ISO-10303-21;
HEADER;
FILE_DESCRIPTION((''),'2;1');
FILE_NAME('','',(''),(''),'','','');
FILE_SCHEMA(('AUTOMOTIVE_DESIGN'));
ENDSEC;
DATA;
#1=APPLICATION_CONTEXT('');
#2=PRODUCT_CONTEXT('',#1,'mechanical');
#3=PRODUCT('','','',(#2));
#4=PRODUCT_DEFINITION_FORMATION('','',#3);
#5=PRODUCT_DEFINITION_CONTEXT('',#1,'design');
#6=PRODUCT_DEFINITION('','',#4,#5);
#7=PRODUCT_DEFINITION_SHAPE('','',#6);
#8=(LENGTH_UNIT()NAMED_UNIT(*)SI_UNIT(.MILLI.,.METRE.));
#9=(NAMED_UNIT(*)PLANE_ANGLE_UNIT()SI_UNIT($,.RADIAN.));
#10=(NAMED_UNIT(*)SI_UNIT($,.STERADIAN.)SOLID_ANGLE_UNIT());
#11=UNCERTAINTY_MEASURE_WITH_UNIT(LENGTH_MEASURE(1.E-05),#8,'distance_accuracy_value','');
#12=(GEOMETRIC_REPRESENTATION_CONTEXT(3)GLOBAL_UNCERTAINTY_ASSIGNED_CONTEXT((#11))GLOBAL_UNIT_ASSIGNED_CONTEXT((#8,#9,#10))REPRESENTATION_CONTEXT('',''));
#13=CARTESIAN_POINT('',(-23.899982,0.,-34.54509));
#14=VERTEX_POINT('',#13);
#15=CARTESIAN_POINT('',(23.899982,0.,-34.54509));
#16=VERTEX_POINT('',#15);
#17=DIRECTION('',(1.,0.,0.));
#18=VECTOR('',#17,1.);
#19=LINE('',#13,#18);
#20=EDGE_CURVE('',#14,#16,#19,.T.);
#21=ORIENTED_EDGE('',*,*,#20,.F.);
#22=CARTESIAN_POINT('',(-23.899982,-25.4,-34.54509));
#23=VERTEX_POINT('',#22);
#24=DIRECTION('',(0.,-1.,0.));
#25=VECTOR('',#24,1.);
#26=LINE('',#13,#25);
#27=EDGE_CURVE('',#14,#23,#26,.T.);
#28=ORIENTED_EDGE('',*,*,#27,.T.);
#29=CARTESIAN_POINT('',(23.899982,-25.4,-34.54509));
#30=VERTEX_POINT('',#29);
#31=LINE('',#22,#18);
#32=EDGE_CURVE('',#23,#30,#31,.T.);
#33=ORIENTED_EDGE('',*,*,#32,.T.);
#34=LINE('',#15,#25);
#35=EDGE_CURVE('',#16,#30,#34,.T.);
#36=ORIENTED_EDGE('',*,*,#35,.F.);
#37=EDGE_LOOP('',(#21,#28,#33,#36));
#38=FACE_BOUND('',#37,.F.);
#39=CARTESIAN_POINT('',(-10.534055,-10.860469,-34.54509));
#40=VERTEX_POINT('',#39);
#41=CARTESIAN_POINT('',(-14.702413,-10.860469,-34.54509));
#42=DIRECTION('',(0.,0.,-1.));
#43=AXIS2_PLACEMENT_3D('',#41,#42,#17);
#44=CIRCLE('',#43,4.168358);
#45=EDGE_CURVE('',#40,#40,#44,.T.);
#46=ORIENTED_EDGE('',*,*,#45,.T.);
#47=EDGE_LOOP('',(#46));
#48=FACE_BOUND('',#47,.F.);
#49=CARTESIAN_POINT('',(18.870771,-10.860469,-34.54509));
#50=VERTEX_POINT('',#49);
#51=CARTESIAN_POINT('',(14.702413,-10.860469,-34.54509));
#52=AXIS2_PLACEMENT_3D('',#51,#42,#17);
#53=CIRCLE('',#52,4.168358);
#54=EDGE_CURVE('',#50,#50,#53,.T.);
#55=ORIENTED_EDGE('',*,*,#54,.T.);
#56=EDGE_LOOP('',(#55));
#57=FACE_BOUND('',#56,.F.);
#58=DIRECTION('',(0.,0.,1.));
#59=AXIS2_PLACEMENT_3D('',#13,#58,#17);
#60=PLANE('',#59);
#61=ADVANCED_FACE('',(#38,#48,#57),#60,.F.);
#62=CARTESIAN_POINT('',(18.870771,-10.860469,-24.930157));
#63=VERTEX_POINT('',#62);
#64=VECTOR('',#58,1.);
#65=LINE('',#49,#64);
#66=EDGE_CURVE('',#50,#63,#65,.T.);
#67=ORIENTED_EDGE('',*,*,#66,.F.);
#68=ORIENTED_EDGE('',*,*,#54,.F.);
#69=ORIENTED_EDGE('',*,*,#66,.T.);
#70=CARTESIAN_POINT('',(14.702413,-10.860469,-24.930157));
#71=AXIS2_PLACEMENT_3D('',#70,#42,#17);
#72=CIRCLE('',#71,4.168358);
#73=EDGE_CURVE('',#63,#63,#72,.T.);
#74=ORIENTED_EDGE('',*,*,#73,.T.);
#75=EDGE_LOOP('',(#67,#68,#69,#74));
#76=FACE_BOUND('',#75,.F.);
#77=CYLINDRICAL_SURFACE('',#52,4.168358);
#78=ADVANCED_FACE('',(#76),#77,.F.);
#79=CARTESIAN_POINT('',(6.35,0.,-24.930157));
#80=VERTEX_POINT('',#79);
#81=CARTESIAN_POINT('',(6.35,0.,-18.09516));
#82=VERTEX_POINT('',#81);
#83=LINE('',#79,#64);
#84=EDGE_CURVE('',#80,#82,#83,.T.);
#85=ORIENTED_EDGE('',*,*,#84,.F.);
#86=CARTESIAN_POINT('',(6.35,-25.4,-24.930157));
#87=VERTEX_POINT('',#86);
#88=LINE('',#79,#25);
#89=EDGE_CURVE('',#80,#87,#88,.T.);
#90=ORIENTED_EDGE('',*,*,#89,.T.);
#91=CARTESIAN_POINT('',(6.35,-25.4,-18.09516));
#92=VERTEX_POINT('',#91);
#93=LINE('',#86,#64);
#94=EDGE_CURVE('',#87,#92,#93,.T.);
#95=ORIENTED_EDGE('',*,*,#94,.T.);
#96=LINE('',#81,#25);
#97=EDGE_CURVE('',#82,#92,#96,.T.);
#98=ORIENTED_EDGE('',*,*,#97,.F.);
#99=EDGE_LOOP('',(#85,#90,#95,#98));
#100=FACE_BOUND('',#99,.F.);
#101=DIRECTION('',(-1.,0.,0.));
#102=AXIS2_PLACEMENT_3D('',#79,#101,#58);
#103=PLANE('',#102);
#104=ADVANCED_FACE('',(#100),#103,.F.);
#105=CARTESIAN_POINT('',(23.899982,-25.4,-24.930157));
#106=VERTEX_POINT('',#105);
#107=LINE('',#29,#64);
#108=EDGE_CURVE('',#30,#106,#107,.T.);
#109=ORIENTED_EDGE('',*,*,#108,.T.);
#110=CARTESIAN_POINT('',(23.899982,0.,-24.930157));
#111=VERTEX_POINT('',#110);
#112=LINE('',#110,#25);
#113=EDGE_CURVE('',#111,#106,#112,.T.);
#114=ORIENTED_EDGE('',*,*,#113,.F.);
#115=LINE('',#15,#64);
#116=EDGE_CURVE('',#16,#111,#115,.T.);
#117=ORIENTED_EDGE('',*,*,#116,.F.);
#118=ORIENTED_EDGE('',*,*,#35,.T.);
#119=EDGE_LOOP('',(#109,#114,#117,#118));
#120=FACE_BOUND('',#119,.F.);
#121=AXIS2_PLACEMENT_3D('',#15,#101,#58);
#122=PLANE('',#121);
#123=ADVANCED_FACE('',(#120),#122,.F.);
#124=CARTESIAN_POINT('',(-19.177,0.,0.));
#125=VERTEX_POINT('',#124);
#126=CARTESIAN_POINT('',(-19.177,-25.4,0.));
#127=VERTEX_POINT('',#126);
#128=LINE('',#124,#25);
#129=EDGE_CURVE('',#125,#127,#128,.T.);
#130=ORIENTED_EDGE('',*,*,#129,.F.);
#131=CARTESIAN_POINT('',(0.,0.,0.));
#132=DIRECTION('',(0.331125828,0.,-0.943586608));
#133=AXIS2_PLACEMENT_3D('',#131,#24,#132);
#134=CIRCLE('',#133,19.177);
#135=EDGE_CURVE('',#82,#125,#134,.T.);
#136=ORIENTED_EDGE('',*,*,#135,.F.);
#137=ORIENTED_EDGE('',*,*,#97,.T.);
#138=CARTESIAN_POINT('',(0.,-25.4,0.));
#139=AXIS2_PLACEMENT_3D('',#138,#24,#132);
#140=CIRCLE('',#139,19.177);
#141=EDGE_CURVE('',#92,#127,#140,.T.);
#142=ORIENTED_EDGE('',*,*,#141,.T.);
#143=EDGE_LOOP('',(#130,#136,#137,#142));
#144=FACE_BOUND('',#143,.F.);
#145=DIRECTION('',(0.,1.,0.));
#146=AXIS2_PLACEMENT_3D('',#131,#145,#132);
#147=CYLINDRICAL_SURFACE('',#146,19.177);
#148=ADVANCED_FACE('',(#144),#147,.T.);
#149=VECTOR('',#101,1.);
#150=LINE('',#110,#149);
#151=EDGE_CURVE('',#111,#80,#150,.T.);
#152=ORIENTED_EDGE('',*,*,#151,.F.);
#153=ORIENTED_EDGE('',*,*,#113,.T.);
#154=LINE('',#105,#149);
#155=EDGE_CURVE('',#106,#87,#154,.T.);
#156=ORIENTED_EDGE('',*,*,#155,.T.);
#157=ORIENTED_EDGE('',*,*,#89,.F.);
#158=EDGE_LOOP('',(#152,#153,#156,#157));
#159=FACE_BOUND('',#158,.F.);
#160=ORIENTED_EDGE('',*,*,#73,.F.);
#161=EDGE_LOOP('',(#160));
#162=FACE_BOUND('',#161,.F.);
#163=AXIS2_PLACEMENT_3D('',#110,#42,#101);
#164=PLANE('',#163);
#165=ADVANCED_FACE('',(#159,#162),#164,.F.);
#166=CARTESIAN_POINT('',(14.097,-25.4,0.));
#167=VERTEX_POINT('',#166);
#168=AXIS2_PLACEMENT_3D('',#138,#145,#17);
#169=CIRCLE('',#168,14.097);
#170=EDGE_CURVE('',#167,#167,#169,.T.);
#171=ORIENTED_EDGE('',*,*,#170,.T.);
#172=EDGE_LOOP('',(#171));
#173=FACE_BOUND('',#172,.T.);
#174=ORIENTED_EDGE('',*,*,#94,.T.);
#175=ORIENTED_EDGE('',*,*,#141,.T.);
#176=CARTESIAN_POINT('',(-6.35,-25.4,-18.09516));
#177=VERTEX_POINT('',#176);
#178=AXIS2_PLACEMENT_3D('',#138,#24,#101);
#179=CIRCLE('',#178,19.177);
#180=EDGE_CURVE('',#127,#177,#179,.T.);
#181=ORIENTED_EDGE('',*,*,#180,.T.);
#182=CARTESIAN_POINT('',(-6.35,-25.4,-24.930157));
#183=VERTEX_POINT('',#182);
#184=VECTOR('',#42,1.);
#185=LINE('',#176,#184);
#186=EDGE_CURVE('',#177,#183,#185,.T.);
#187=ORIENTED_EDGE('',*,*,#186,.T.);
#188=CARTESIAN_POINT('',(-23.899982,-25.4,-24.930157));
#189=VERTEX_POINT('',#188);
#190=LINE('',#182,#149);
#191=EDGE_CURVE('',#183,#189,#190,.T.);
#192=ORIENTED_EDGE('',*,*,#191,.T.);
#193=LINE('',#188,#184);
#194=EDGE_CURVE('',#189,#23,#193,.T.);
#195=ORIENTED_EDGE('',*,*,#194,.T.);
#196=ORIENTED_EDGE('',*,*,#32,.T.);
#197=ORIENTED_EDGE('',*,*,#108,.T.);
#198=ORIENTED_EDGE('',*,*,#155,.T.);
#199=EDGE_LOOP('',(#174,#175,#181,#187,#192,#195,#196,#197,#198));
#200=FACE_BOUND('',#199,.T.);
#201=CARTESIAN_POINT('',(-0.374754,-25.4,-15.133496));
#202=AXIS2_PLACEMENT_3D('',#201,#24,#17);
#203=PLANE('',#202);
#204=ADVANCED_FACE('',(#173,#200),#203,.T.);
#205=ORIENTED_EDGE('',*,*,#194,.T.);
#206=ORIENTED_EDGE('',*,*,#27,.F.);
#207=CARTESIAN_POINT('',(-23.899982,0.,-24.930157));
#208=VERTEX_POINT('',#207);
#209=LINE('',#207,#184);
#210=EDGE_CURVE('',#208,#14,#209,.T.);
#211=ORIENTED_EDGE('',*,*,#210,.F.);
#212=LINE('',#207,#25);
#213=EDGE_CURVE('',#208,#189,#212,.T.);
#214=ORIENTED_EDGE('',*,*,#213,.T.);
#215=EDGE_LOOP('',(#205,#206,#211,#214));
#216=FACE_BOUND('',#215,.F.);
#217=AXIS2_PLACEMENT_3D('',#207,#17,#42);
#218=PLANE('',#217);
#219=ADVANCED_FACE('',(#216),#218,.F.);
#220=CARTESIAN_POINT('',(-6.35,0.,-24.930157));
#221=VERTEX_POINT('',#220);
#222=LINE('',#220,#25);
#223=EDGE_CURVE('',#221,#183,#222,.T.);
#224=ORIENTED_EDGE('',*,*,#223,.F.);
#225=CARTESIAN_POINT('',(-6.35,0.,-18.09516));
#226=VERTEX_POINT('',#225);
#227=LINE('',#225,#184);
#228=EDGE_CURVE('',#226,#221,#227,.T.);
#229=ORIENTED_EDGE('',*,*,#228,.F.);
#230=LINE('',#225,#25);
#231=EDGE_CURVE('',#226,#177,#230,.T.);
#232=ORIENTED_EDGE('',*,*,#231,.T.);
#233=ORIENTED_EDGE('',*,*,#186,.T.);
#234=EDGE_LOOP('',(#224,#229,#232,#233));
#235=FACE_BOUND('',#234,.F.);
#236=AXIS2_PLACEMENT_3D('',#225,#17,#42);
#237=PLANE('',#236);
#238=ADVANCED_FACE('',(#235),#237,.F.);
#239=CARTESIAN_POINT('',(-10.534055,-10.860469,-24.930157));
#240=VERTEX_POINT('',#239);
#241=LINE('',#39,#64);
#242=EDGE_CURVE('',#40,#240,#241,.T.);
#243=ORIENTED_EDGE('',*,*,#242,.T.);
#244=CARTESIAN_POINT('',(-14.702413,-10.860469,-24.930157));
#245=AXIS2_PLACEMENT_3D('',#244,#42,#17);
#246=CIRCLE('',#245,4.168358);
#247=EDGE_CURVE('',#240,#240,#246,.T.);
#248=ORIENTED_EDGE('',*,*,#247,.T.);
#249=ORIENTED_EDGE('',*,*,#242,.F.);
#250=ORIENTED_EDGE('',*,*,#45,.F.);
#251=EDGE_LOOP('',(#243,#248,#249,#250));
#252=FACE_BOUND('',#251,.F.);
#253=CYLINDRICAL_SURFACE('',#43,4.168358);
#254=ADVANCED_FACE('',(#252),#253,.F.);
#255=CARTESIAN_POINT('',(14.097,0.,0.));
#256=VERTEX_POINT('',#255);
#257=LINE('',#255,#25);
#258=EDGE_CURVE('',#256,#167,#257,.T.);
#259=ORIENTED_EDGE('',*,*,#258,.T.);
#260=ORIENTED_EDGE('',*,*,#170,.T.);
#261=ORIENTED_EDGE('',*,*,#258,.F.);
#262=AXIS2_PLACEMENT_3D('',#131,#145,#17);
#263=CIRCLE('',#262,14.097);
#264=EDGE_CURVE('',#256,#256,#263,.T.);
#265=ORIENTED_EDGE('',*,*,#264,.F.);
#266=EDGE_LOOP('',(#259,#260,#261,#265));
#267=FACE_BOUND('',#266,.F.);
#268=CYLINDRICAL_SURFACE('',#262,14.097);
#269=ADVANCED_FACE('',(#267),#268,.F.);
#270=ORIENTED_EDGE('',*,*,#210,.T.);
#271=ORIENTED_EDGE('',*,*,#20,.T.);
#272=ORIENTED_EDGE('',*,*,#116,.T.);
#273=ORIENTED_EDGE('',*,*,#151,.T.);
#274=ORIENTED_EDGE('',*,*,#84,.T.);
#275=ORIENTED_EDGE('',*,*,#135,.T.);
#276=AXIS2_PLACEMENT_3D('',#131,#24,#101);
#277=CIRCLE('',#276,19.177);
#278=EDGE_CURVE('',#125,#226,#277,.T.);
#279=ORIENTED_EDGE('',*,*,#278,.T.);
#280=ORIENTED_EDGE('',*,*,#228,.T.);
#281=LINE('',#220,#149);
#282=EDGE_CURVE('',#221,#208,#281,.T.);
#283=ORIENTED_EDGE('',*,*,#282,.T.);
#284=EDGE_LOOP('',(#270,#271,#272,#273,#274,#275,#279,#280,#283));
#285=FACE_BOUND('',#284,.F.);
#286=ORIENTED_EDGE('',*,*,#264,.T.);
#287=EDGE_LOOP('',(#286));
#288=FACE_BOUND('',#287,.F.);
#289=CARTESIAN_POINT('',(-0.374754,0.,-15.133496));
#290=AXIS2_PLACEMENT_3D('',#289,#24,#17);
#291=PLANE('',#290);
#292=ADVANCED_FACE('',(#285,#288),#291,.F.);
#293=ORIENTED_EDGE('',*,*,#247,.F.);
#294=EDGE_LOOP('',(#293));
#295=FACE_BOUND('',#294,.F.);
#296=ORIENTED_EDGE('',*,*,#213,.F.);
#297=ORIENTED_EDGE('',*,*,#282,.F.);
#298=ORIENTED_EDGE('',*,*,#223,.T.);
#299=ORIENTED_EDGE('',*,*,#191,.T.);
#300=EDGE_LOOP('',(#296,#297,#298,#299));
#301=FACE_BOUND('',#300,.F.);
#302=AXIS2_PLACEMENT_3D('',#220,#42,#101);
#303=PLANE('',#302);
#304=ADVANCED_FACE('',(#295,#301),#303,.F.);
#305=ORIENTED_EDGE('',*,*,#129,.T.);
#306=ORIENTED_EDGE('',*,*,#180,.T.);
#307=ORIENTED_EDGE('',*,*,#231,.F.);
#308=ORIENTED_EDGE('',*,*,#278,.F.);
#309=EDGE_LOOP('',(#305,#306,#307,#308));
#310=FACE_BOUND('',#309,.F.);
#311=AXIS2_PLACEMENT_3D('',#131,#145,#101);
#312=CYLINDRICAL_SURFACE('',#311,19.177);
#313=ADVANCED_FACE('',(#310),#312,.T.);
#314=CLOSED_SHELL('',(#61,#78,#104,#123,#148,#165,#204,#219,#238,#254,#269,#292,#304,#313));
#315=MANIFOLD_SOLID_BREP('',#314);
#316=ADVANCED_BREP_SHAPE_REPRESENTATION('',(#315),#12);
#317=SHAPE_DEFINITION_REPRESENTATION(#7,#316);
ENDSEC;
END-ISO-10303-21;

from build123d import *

# Parameters (mm, degrees)
F1_DEPTH = 25.4
F2_R     = 4.1683581246
F3_DEPTH = 10.668


# Not quite as in the source:
# - a feature names something its author has since deleted; it is built from what else it names


with BuildPart() as f1:
    # F0 (on Front) → F1 (new body)
    with BuildSketch(Plane.XZ):
        with BuildLine():
            ThreePointArc((6.35, -18.0951603751), (11.0901618338, 15.6449876798), (-19.177, 0))
            ThreePointArc((-19.177, 0), (-15.6449876798, -11.0901618338), (-6.35, -18.0951603751))
            Line((-6.35, -18.0951603751), (-6.35, -24.9301567674))
            Line((-6.35, -24.9301567674), (-23.899981752, -24.9301567674))
            Line((-23.899981752, -24.9301567674), (-23.899981752, -34.5450900495))
            Line((-23.899981752, -34.5450900495), (23.899981752, -34.5450900495))
            Line((23.899981752, -34.5450900495), (23.899981752, -24.9301567674))
            Line((23.899981752, -24.9301567674), (6.35, -24.9301567674))
            Line((6.35, -24.9301567674), (6.35, -18.0951603751))
        make_face()
        with BuildLine():
            ThreePointArc((-14.097, 0), (0, 14.097), (14.097, 0))
            ThreePointArc((14.097, 0), (0, -14.097), (-14.097, 0))
        make_face(mode=Mode.SUBTRACT)
    extrude(amount=F1_DEPTH)

    # F2 (on face) → F3 (cut)
    with BuildSketch(Plane(origin=(0, 0, -34.5450900495), x_dir=(1, 0, 0), z_dir=(0, 0, -1))):
        with Locations((-14.7024132311, 10.8604691923)):
            Circle(F2_R)
        with Locations((14.7024132311, 10.8604691923)):
            Circle(F2_R)
    extrude(amount=-F3_DEPTH, mode=Mode.SUBTRACT)


solid = f1.part
